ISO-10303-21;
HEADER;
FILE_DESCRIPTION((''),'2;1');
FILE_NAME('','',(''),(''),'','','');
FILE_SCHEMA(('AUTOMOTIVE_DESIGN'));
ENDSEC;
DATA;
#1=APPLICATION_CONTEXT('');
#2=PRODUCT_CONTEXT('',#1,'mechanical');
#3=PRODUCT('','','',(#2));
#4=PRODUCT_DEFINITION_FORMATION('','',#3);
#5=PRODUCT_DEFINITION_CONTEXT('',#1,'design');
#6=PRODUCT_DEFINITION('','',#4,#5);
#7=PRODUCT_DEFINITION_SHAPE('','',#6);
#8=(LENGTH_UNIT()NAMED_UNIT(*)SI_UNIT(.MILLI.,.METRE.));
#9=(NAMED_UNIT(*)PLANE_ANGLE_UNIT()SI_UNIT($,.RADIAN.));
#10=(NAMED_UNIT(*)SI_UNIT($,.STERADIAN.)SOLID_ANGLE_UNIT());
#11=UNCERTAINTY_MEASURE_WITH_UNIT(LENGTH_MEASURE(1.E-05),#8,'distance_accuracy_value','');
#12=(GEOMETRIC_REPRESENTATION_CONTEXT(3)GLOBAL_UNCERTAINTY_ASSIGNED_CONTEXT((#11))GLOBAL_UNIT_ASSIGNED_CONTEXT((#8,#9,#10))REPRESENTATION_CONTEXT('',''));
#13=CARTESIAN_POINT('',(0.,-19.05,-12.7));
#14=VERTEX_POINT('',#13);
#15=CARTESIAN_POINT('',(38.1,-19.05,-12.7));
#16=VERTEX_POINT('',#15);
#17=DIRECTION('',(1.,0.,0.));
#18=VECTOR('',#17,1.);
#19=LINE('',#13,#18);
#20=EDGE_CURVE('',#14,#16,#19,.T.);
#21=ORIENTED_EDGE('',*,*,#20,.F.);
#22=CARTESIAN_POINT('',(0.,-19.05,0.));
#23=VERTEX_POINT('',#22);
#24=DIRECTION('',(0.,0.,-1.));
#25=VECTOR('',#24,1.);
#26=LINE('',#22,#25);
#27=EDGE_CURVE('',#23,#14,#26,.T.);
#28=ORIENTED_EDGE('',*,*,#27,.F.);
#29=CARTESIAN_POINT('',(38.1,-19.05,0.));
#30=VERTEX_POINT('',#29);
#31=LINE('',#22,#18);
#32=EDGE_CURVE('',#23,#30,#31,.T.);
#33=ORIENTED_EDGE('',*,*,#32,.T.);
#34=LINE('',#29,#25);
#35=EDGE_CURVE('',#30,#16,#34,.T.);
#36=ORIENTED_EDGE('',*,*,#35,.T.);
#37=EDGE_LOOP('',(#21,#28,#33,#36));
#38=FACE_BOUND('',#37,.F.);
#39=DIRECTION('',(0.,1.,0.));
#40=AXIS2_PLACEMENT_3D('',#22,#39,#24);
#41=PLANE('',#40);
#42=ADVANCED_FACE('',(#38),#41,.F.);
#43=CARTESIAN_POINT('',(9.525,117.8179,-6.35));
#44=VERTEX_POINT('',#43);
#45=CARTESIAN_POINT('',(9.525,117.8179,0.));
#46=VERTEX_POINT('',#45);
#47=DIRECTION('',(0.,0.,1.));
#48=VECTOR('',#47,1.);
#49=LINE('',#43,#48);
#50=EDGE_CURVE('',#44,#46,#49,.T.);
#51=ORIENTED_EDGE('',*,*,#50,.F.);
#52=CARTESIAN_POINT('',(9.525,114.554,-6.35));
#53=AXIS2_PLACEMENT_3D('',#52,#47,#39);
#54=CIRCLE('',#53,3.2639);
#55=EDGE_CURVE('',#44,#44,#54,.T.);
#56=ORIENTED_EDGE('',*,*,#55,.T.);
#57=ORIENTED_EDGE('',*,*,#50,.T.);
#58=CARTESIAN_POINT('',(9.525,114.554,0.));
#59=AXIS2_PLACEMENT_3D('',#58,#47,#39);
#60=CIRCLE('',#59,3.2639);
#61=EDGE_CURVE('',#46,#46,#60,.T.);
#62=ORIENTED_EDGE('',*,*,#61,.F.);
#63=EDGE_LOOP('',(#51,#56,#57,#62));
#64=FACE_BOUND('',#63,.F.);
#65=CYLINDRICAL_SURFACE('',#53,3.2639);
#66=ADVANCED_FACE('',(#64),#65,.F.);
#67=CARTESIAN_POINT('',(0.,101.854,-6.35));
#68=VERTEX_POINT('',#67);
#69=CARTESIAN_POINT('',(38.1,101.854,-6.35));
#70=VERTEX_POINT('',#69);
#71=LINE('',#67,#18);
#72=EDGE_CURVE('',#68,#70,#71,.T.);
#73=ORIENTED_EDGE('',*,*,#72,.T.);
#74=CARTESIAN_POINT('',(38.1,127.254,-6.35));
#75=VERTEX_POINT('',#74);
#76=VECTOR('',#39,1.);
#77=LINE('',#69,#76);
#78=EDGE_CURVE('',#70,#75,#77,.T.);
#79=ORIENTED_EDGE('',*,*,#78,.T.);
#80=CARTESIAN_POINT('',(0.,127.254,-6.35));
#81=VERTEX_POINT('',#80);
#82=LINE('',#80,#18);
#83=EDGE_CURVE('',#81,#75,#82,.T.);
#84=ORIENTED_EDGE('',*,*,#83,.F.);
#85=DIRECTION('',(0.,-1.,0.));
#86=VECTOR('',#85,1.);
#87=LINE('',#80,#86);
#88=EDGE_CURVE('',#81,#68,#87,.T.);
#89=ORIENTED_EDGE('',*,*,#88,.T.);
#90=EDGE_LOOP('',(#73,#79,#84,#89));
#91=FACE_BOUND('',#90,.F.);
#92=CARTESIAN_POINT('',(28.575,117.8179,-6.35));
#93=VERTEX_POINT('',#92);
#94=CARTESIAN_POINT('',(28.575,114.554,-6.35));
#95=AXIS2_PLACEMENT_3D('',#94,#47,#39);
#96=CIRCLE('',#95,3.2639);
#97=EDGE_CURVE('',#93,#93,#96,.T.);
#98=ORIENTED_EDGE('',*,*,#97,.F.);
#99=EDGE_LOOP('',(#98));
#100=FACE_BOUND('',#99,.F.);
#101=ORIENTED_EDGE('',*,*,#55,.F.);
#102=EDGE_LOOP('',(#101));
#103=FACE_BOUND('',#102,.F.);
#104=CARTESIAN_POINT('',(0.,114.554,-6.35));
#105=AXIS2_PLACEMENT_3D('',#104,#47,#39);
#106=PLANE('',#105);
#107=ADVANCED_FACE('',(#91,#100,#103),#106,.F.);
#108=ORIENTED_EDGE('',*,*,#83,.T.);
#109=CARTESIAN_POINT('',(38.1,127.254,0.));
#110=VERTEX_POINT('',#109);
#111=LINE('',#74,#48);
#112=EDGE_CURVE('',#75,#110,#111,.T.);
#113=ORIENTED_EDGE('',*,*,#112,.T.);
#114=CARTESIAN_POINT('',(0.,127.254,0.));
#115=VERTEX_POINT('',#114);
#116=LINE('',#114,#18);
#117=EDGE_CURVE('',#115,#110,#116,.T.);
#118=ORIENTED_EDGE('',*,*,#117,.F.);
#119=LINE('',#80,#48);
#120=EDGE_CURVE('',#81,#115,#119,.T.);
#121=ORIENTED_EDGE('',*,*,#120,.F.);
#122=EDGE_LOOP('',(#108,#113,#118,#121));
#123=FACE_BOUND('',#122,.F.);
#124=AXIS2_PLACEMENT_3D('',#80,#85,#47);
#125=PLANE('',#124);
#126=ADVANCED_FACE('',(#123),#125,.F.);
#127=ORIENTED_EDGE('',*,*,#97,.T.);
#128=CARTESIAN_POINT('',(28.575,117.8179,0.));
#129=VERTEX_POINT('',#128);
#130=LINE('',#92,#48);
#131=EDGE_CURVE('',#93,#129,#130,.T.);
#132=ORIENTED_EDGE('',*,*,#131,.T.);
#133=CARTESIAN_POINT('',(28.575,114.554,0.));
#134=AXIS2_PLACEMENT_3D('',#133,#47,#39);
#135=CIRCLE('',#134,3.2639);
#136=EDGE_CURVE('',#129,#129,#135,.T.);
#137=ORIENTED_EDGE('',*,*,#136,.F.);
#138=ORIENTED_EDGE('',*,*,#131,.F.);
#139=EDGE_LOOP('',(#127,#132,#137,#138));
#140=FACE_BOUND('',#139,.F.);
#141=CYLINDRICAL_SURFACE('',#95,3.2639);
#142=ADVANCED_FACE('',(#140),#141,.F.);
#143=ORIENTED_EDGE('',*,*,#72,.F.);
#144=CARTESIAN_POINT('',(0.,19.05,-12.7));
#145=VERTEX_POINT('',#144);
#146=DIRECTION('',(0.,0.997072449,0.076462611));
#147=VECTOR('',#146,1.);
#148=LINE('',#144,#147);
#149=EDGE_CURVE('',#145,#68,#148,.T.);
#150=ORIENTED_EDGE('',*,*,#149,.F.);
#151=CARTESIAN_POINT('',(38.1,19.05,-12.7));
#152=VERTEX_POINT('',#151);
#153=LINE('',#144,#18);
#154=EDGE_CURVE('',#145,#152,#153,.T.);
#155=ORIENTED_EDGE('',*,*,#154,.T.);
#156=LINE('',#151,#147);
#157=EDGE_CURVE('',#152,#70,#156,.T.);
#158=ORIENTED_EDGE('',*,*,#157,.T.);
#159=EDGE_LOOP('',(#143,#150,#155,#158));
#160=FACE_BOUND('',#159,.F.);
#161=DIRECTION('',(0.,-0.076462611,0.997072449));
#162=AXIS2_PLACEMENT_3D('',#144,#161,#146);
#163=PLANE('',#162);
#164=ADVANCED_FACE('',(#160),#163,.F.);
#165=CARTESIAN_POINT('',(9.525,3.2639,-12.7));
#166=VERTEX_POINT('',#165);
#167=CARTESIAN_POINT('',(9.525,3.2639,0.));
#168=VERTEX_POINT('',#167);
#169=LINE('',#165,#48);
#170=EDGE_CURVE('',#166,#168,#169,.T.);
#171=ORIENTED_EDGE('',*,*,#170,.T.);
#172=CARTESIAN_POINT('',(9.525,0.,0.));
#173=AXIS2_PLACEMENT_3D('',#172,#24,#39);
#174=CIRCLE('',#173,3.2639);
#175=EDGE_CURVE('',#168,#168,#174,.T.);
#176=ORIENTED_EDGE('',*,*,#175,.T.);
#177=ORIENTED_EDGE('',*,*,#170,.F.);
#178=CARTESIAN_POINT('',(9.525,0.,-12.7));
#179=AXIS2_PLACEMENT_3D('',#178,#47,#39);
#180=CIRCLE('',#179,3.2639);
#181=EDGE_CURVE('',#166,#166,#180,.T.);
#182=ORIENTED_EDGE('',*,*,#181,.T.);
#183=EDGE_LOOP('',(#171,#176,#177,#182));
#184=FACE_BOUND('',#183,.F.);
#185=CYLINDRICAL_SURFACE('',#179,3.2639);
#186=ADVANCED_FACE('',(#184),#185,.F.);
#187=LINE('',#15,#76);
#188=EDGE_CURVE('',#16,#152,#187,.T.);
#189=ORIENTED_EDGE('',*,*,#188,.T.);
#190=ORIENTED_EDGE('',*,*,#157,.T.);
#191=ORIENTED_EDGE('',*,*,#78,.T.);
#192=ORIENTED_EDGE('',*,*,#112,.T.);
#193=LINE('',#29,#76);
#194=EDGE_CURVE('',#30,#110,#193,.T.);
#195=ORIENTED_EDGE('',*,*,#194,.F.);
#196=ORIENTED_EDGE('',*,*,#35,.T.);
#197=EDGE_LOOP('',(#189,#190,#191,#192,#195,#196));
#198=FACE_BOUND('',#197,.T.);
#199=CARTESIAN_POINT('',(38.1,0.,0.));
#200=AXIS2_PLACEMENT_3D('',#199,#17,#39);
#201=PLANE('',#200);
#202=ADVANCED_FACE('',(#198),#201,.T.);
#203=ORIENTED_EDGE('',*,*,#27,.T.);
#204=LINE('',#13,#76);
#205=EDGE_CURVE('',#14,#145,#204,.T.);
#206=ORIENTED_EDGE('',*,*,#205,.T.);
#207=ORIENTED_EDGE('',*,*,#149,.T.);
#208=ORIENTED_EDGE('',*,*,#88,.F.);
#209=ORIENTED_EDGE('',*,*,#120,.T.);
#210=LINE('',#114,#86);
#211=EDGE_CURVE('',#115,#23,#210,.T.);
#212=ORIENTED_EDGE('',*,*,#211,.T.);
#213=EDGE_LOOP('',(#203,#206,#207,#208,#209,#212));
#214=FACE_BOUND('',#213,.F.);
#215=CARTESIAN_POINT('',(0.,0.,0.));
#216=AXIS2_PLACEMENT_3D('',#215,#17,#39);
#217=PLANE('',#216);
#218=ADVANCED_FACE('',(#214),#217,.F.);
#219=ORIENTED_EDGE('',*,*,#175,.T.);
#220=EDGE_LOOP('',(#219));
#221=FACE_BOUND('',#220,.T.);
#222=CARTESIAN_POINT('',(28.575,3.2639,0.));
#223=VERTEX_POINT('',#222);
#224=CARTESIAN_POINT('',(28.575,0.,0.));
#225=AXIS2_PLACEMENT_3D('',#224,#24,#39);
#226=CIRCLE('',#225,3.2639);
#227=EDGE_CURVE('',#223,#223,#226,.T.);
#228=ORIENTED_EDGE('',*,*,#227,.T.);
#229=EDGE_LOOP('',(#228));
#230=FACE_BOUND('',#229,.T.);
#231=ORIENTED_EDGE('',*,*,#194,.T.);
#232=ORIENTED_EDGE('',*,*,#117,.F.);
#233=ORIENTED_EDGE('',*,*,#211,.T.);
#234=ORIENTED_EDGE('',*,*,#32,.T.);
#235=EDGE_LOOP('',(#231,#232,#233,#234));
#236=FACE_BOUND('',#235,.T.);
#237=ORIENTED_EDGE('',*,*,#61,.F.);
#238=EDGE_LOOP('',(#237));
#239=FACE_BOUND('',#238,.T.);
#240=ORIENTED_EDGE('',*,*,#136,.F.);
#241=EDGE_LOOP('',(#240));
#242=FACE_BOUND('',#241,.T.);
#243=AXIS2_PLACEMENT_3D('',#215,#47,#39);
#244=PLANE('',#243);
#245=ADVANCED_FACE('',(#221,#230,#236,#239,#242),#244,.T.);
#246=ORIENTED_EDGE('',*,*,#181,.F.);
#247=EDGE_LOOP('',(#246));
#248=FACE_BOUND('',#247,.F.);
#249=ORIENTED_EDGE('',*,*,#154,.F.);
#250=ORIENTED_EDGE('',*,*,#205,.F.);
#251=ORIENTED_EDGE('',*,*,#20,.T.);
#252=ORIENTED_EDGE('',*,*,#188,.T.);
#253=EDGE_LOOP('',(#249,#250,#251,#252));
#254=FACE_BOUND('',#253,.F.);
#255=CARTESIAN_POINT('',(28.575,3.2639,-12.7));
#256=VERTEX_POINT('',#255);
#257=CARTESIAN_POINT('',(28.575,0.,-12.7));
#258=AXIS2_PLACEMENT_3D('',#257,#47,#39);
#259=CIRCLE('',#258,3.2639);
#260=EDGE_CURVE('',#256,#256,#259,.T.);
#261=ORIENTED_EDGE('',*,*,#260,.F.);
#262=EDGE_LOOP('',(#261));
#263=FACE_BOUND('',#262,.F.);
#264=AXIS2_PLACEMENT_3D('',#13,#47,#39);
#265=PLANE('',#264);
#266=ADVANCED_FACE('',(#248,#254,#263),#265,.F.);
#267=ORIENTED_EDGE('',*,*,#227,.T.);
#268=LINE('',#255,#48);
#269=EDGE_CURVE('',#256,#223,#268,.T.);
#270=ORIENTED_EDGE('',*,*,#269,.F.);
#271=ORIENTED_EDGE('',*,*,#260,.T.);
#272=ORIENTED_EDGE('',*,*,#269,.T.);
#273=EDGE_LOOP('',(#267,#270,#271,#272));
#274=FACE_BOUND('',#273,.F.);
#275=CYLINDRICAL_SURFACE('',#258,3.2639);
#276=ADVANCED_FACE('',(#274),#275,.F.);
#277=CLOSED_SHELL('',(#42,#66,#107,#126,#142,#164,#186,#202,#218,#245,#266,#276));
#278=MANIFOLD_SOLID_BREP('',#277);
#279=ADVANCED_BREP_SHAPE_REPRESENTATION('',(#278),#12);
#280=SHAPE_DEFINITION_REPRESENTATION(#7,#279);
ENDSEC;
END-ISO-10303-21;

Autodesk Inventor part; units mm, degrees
ref_plane "YZ Plane" through (0, 0, 0) normal (1, 0, 0) x (0, 1, 0)
ref_plane "XZ Plane" through (0, 0, 0) normal (0, 1, 0) x (-1, 0, 0)
ref_plane "XY Plane" through (0, 0, 0) normal (0, 0, 1) x (1, 0, 0)
sketch "Sketch1" plane through (0, 0, 0) normal (1, 0, 0) x (0, 1, 0)
  line L0 (0, 0) -> (114.554, 0)
  line L1 (0, 0) -> (-19.05, 0)
  line L2 (-19.05, 0) -> (-19.05, -12.7)
  line L3 (-19.05, -12.7) -> (19.05, -12.7)
  line L4 (101.854, -6.35) -> (114.554, -6.35)
  line L5 (114.554, -6.35) -> (127.254, -6.35)
  line L6 (127.254, -6.35) -> (127.254, 0)
  line L7 (127.254, 0) -> (114.554, 0)
  line L8 (114.554, 0) -> (114.554, -6.35) construction
  line L9 (101.854, 0) -> (101.854, -6.35) construction
  line L10 (19.05, -12.7) -> (101.854, -6.35)
  dimension "d0" = 114.554
  dimension "d1" = 19.05
  dimension "d2" = 12.7
  dimension "d3" = 38.1
  dimension "d4" = 12.7
  dimension "d5" = 25.4
  dimension "d6" = 6.35
extrude "Extrusion1" add sketch "Sketch1" along normal blind 38.1
sketch "Sketch2" plane through (0, -19.05, -12.7) normal (0, 0, -1) x (-1, 0, 0)
  line L0 (0, 38.1) -> (0, 0) projected
  line L1 (0, 38.1) -> (-38.1, 38.1) projected
  line L2 (-38.1, 0) -> (-38.1, 38.1) projected
  line L3 (0, 0) -> (-38.1, 0) projected
  line L4 (0, 19.05) -> (-38.1, 19.05) construction
  line L5 (-28.575, 38.1) -> (-28.575, 0) construction
  line L6 (-9.525, 38.1) -> (-9.525, 32.2712) construction
  line L7 (-9.525, 32.2712) -> (-9.525, 0) construction
  point P0 (-28.575, 19.05)
  point P1 (-9.525, 19.05)
  dimension "d9" = 9.525
  dimension "d10" = 9.525
sketch "Sketch3" plane through (0, 101.854, -6.35) normal (0, 0, -1) x (-1, 0, 0)
  line L0 (0, 25.4) -> (0, 0) projected
  line L1 (0, 25.4) -> (-38.1, 25.4) projected
  line L2 (-38.1, 0) -> (-38.1, 25.4) projected
  line L3 (0, 0) -> (-38.1, 0) projected
  line L4 (-38.1, 12.7) -> (0, 12.7) construction
  line L5 (-28.575, 25.4) -> (-28.575, 0) construction
  line L6 (-9.525, 25.4) -> (-9.525, 0) construction
  point P0 (0, -101.854)
  point P1 (-28.575, 12.7)
  point P2 (-9.525, 12.7)
  dimension "d11" = 9.525
  dimension "d12" = 9.525
hole "Hole1" at (9.525, 0, -12.7) at (28.575, 0, -12.7) direction (0, 0, 1) diameter 6.5278 end through all clearance for "Flat Head Machine Screw (82)" size "1/4" standard "Ansi Unified Screw Threads"
hole "Hole2" at (28.575, 114.554, -6.35) at (9.525, 114.554, -6.35) direction (0, 0, 1) diameter 6.5278 end through all clearance for "Flat Head Machine Screw (82)" size "1/4" standard "Ansi Unified Screw Threads"
fillet_without_effect "Fillet1"
equation "\"d9\" = d10"
equation "\"d12\" = d11"
properties part number "Y_shaft_support_brace_A" material "Aluminum 6061"
